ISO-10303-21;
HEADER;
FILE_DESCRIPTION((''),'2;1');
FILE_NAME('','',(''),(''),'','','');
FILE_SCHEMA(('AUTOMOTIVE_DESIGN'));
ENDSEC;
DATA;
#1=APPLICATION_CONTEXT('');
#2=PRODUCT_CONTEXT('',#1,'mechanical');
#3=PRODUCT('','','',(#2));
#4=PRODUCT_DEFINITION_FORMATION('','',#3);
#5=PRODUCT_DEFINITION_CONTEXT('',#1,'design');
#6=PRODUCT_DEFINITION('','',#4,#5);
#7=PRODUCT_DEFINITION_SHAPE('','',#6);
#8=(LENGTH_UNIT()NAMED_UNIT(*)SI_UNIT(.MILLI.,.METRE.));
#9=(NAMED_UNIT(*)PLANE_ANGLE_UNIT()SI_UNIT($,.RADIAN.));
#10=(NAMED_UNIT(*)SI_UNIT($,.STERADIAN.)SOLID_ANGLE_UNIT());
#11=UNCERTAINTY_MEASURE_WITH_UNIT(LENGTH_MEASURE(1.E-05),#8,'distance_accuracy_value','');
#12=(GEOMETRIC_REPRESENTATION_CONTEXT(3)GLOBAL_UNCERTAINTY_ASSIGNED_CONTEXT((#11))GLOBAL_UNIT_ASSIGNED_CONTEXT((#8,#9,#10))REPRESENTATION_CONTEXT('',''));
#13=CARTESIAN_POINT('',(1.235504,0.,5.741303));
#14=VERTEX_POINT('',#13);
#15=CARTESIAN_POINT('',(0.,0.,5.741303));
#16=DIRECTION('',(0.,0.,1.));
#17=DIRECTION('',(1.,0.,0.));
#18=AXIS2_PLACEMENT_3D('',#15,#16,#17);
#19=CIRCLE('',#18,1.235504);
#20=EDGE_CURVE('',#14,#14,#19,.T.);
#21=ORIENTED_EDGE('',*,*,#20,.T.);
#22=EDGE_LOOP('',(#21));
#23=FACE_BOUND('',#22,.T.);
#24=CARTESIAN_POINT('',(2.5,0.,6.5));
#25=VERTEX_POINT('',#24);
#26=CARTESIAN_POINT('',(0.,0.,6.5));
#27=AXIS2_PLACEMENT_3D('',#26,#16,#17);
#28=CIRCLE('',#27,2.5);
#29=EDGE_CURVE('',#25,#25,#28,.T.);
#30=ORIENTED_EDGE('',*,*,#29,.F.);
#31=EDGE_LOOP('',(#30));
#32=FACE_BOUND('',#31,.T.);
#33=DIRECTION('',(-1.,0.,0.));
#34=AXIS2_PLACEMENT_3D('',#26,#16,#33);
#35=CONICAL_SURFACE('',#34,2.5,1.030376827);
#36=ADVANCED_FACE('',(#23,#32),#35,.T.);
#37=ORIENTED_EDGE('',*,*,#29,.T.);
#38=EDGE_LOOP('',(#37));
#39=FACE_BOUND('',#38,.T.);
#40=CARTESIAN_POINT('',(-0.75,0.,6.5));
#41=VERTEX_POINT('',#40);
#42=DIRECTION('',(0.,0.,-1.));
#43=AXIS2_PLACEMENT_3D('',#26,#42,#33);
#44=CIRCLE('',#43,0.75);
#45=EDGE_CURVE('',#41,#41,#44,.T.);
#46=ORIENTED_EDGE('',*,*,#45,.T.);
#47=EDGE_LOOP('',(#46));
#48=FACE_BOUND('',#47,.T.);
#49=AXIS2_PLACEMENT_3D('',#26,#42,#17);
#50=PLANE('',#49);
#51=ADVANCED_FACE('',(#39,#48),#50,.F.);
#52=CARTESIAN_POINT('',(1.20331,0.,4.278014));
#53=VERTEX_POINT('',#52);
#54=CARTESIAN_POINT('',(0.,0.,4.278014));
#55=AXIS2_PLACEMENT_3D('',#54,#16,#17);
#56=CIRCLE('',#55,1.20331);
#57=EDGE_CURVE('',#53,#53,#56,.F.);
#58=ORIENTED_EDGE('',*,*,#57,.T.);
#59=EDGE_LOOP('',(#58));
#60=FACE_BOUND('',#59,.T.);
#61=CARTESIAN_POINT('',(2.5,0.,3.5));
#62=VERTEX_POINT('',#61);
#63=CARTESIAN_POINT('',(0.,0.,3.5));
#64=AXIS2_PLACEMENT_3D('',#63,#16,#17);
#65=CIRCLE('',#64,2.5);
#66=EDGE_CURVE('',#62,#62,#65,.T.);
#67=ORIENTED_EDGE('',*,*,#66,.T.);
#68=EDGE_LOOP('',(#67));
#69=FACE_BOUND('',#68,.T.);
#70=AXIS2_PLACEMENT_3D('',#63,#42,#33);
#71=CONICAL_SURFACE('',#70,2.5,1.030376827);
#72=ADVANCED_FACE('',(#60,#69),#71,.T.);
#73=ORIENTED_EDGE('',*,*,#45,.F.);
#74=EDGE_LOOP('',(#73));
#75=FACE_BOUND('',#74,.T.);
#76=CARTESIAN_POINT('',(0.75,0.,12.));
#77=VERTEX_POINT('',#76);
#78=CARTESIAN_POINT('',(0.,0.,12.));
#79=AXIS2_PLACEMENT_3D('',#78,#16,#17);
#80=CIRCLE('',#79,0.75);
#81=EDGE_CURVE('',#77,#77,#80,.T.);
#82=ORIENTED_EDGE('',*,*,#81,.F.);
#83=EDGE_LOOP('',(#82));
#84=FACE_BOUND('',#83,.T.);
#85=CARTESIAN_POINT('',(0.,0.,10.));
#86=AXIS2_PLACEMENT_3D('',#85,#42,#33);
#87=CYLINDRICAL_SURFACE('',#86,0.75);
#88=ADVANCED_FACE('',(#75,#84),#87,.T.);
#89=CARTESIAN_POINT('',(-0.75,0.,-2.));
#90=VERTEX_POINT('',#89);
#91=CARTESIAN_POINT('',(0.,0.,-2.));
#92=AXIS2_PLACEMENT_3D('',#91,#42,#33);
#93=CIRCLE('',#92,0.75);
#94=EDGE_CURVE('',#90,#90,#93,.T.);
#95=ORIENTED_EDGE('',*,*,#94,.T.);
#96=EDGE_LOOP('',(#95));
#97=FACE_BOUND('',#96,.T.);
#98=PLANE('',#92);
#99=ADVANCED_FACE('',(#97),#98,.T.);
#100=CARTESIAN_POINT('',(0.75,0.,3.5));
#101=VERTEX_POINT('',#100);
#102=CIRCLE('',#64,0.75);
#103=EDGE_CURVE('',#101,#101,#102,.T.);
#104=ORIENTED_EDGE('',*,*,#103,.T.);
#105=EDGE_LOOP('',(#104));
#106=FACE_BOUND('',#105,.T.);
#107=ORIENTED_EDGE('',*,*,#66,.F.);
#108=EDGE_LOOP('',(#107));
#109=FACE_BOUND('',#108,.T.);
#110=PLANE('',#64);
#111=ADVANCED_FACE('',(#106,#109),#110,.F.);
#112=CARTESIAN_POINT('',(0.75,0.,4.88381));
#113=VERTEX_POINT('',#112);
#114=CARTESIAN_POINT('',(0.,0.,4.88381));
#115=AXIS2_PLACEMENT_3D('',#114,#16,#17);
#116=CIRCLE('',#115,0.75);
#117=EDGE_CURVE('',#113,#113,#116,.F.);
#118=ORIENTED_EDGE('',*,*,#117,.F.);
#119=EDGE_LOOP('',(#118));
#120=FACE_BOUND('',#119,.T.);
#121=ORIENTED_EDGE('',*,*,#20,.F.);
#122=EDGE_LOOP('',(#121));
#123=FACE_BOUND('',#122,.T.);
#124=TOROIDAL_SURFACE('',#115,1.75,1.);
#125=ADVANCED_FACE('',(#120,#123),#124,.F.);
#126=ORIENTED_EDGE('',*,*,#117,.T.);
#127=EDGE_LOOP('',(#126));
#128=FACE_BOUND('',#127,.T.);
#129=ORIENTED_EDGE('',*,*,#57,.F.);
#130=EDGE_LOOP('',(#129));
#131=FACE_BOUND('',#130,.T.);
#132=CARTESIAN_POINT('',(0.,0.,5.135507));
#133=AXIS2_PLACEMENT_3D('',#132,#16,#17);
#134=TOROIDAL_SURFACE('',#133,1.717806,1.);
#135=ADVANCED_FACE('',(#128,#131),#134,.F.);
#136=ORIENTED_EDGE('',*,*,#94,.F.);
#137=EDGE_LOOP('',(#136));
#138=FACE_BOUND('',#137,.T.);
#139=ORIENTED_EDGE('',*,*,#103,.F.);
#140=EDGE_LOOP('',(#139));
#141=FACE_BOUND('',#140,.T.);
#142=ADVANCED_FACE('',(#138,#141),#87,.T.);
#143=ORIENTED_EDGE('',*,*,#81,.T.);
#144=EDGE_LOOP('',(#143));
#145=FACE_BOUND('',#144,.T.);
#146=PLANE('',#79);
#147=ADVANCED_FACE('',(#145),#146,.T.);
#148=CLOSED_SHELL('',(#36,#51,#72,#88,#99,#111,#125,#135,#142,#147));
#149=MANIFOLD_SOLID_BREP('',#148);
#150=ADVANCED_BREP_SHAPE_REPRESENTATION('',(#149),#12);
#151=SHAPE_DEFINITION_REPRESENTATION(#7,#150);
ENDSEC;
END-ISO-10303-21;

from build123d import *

# Parameters (mm, degrees)
SKETCH1_R           = 0.75
BOSS_EXTRUDE1_DEPTH = 10
FILLET3_R           = 1
BOSS_EXTRUDE3_START = 2
SKETCH4_R           = 0.75
BOSS_EXTRUDE3_DEPTH = 2
SKETCH5_R           = 0.75
BOSS_EXTRUDE4_DEPTH = 2


with BuildPart() as part:
    # Sketch1 → Boss-Extrude1 (new body)
    with BuildSketch(Plane.XY):
        Circle(SKETCH1_R)
    extrude(amount=BOSS_EXTRUDE1_DEPTH)

    # Sketch3 → Revolve1 (revolve)
    with BuildSketch(Plane(origin=(0, 0, 0), x_dir=(0, 0, -1), z_dir=(1, 0, 0)), mode=Mode.PRIVATE) as revolve1_sk:
        Polygon((-3.5, 0), (-3.5, 2.5), (-5, 0), align=None)
    revolve1 = revolve(revolve1_sk.sketch.rotate(Axis((0, 0, 5), (0, 0, -1)), 270), axis=Axis((0, 0, 5), (0, 0, -1)))

    # Mirror1: Revolve1 across plane
    add(revolve1.mirror(Plane(origin=(0, 0, 5), x_dir=(1, 0, 0), z_dir=(0, 0, -1))))

    # Fillet3
    fillet3_edges = [part.edges().sort_by_distance(p)[0] for p in [
        (0, -0.75, 5.45),
    ]]
    fillet(fillet3_edges, radius=FILLET3_R)

    # Fillet4: read off the stored shape, not the designer's step
    # Fillet4 outline → Fillet4 (revolve)
    with BuildSketch(Plane.XZ):
        with BuildLine():
            Line((0.75, 4.883809621), (0.75, 4.278013821))
            Line((0.75, 4.278013821), (1.203310298, 4.278013821))
            ThreePointArc((1.203310298, 4.278013821), (0.917148948, 4.536383889), (0.75, 4.883809621))
        make_face()
    revolve(axis=Axis((0, 0, 0), (0, 0, 1)))

    # Sketch4 → Boss-Extrude3 (add)
    with BuildSketch(Plane(origin=(0, 0, 0), x_dir=(-1, 0, 0), z_dir=(0, 0, -1)).offset(BOSS_EXTRUDE3_START)):
        Circle(SKETCH4_R)
    extrude(amount=-BOSS_EXTRUDE3_DEPTH)

    # Sketch5 → Boss-Extrude4 (add)
    with BuildSketch(Plane.XY.offset(10)):
        with Locations(Location((0, 0, 0), (0, 0, 180))):
            Circle(SKETCH5_R)
    extrude(amount=BOSS_EXTRUDE4_DEPTH)


solid = part.part
